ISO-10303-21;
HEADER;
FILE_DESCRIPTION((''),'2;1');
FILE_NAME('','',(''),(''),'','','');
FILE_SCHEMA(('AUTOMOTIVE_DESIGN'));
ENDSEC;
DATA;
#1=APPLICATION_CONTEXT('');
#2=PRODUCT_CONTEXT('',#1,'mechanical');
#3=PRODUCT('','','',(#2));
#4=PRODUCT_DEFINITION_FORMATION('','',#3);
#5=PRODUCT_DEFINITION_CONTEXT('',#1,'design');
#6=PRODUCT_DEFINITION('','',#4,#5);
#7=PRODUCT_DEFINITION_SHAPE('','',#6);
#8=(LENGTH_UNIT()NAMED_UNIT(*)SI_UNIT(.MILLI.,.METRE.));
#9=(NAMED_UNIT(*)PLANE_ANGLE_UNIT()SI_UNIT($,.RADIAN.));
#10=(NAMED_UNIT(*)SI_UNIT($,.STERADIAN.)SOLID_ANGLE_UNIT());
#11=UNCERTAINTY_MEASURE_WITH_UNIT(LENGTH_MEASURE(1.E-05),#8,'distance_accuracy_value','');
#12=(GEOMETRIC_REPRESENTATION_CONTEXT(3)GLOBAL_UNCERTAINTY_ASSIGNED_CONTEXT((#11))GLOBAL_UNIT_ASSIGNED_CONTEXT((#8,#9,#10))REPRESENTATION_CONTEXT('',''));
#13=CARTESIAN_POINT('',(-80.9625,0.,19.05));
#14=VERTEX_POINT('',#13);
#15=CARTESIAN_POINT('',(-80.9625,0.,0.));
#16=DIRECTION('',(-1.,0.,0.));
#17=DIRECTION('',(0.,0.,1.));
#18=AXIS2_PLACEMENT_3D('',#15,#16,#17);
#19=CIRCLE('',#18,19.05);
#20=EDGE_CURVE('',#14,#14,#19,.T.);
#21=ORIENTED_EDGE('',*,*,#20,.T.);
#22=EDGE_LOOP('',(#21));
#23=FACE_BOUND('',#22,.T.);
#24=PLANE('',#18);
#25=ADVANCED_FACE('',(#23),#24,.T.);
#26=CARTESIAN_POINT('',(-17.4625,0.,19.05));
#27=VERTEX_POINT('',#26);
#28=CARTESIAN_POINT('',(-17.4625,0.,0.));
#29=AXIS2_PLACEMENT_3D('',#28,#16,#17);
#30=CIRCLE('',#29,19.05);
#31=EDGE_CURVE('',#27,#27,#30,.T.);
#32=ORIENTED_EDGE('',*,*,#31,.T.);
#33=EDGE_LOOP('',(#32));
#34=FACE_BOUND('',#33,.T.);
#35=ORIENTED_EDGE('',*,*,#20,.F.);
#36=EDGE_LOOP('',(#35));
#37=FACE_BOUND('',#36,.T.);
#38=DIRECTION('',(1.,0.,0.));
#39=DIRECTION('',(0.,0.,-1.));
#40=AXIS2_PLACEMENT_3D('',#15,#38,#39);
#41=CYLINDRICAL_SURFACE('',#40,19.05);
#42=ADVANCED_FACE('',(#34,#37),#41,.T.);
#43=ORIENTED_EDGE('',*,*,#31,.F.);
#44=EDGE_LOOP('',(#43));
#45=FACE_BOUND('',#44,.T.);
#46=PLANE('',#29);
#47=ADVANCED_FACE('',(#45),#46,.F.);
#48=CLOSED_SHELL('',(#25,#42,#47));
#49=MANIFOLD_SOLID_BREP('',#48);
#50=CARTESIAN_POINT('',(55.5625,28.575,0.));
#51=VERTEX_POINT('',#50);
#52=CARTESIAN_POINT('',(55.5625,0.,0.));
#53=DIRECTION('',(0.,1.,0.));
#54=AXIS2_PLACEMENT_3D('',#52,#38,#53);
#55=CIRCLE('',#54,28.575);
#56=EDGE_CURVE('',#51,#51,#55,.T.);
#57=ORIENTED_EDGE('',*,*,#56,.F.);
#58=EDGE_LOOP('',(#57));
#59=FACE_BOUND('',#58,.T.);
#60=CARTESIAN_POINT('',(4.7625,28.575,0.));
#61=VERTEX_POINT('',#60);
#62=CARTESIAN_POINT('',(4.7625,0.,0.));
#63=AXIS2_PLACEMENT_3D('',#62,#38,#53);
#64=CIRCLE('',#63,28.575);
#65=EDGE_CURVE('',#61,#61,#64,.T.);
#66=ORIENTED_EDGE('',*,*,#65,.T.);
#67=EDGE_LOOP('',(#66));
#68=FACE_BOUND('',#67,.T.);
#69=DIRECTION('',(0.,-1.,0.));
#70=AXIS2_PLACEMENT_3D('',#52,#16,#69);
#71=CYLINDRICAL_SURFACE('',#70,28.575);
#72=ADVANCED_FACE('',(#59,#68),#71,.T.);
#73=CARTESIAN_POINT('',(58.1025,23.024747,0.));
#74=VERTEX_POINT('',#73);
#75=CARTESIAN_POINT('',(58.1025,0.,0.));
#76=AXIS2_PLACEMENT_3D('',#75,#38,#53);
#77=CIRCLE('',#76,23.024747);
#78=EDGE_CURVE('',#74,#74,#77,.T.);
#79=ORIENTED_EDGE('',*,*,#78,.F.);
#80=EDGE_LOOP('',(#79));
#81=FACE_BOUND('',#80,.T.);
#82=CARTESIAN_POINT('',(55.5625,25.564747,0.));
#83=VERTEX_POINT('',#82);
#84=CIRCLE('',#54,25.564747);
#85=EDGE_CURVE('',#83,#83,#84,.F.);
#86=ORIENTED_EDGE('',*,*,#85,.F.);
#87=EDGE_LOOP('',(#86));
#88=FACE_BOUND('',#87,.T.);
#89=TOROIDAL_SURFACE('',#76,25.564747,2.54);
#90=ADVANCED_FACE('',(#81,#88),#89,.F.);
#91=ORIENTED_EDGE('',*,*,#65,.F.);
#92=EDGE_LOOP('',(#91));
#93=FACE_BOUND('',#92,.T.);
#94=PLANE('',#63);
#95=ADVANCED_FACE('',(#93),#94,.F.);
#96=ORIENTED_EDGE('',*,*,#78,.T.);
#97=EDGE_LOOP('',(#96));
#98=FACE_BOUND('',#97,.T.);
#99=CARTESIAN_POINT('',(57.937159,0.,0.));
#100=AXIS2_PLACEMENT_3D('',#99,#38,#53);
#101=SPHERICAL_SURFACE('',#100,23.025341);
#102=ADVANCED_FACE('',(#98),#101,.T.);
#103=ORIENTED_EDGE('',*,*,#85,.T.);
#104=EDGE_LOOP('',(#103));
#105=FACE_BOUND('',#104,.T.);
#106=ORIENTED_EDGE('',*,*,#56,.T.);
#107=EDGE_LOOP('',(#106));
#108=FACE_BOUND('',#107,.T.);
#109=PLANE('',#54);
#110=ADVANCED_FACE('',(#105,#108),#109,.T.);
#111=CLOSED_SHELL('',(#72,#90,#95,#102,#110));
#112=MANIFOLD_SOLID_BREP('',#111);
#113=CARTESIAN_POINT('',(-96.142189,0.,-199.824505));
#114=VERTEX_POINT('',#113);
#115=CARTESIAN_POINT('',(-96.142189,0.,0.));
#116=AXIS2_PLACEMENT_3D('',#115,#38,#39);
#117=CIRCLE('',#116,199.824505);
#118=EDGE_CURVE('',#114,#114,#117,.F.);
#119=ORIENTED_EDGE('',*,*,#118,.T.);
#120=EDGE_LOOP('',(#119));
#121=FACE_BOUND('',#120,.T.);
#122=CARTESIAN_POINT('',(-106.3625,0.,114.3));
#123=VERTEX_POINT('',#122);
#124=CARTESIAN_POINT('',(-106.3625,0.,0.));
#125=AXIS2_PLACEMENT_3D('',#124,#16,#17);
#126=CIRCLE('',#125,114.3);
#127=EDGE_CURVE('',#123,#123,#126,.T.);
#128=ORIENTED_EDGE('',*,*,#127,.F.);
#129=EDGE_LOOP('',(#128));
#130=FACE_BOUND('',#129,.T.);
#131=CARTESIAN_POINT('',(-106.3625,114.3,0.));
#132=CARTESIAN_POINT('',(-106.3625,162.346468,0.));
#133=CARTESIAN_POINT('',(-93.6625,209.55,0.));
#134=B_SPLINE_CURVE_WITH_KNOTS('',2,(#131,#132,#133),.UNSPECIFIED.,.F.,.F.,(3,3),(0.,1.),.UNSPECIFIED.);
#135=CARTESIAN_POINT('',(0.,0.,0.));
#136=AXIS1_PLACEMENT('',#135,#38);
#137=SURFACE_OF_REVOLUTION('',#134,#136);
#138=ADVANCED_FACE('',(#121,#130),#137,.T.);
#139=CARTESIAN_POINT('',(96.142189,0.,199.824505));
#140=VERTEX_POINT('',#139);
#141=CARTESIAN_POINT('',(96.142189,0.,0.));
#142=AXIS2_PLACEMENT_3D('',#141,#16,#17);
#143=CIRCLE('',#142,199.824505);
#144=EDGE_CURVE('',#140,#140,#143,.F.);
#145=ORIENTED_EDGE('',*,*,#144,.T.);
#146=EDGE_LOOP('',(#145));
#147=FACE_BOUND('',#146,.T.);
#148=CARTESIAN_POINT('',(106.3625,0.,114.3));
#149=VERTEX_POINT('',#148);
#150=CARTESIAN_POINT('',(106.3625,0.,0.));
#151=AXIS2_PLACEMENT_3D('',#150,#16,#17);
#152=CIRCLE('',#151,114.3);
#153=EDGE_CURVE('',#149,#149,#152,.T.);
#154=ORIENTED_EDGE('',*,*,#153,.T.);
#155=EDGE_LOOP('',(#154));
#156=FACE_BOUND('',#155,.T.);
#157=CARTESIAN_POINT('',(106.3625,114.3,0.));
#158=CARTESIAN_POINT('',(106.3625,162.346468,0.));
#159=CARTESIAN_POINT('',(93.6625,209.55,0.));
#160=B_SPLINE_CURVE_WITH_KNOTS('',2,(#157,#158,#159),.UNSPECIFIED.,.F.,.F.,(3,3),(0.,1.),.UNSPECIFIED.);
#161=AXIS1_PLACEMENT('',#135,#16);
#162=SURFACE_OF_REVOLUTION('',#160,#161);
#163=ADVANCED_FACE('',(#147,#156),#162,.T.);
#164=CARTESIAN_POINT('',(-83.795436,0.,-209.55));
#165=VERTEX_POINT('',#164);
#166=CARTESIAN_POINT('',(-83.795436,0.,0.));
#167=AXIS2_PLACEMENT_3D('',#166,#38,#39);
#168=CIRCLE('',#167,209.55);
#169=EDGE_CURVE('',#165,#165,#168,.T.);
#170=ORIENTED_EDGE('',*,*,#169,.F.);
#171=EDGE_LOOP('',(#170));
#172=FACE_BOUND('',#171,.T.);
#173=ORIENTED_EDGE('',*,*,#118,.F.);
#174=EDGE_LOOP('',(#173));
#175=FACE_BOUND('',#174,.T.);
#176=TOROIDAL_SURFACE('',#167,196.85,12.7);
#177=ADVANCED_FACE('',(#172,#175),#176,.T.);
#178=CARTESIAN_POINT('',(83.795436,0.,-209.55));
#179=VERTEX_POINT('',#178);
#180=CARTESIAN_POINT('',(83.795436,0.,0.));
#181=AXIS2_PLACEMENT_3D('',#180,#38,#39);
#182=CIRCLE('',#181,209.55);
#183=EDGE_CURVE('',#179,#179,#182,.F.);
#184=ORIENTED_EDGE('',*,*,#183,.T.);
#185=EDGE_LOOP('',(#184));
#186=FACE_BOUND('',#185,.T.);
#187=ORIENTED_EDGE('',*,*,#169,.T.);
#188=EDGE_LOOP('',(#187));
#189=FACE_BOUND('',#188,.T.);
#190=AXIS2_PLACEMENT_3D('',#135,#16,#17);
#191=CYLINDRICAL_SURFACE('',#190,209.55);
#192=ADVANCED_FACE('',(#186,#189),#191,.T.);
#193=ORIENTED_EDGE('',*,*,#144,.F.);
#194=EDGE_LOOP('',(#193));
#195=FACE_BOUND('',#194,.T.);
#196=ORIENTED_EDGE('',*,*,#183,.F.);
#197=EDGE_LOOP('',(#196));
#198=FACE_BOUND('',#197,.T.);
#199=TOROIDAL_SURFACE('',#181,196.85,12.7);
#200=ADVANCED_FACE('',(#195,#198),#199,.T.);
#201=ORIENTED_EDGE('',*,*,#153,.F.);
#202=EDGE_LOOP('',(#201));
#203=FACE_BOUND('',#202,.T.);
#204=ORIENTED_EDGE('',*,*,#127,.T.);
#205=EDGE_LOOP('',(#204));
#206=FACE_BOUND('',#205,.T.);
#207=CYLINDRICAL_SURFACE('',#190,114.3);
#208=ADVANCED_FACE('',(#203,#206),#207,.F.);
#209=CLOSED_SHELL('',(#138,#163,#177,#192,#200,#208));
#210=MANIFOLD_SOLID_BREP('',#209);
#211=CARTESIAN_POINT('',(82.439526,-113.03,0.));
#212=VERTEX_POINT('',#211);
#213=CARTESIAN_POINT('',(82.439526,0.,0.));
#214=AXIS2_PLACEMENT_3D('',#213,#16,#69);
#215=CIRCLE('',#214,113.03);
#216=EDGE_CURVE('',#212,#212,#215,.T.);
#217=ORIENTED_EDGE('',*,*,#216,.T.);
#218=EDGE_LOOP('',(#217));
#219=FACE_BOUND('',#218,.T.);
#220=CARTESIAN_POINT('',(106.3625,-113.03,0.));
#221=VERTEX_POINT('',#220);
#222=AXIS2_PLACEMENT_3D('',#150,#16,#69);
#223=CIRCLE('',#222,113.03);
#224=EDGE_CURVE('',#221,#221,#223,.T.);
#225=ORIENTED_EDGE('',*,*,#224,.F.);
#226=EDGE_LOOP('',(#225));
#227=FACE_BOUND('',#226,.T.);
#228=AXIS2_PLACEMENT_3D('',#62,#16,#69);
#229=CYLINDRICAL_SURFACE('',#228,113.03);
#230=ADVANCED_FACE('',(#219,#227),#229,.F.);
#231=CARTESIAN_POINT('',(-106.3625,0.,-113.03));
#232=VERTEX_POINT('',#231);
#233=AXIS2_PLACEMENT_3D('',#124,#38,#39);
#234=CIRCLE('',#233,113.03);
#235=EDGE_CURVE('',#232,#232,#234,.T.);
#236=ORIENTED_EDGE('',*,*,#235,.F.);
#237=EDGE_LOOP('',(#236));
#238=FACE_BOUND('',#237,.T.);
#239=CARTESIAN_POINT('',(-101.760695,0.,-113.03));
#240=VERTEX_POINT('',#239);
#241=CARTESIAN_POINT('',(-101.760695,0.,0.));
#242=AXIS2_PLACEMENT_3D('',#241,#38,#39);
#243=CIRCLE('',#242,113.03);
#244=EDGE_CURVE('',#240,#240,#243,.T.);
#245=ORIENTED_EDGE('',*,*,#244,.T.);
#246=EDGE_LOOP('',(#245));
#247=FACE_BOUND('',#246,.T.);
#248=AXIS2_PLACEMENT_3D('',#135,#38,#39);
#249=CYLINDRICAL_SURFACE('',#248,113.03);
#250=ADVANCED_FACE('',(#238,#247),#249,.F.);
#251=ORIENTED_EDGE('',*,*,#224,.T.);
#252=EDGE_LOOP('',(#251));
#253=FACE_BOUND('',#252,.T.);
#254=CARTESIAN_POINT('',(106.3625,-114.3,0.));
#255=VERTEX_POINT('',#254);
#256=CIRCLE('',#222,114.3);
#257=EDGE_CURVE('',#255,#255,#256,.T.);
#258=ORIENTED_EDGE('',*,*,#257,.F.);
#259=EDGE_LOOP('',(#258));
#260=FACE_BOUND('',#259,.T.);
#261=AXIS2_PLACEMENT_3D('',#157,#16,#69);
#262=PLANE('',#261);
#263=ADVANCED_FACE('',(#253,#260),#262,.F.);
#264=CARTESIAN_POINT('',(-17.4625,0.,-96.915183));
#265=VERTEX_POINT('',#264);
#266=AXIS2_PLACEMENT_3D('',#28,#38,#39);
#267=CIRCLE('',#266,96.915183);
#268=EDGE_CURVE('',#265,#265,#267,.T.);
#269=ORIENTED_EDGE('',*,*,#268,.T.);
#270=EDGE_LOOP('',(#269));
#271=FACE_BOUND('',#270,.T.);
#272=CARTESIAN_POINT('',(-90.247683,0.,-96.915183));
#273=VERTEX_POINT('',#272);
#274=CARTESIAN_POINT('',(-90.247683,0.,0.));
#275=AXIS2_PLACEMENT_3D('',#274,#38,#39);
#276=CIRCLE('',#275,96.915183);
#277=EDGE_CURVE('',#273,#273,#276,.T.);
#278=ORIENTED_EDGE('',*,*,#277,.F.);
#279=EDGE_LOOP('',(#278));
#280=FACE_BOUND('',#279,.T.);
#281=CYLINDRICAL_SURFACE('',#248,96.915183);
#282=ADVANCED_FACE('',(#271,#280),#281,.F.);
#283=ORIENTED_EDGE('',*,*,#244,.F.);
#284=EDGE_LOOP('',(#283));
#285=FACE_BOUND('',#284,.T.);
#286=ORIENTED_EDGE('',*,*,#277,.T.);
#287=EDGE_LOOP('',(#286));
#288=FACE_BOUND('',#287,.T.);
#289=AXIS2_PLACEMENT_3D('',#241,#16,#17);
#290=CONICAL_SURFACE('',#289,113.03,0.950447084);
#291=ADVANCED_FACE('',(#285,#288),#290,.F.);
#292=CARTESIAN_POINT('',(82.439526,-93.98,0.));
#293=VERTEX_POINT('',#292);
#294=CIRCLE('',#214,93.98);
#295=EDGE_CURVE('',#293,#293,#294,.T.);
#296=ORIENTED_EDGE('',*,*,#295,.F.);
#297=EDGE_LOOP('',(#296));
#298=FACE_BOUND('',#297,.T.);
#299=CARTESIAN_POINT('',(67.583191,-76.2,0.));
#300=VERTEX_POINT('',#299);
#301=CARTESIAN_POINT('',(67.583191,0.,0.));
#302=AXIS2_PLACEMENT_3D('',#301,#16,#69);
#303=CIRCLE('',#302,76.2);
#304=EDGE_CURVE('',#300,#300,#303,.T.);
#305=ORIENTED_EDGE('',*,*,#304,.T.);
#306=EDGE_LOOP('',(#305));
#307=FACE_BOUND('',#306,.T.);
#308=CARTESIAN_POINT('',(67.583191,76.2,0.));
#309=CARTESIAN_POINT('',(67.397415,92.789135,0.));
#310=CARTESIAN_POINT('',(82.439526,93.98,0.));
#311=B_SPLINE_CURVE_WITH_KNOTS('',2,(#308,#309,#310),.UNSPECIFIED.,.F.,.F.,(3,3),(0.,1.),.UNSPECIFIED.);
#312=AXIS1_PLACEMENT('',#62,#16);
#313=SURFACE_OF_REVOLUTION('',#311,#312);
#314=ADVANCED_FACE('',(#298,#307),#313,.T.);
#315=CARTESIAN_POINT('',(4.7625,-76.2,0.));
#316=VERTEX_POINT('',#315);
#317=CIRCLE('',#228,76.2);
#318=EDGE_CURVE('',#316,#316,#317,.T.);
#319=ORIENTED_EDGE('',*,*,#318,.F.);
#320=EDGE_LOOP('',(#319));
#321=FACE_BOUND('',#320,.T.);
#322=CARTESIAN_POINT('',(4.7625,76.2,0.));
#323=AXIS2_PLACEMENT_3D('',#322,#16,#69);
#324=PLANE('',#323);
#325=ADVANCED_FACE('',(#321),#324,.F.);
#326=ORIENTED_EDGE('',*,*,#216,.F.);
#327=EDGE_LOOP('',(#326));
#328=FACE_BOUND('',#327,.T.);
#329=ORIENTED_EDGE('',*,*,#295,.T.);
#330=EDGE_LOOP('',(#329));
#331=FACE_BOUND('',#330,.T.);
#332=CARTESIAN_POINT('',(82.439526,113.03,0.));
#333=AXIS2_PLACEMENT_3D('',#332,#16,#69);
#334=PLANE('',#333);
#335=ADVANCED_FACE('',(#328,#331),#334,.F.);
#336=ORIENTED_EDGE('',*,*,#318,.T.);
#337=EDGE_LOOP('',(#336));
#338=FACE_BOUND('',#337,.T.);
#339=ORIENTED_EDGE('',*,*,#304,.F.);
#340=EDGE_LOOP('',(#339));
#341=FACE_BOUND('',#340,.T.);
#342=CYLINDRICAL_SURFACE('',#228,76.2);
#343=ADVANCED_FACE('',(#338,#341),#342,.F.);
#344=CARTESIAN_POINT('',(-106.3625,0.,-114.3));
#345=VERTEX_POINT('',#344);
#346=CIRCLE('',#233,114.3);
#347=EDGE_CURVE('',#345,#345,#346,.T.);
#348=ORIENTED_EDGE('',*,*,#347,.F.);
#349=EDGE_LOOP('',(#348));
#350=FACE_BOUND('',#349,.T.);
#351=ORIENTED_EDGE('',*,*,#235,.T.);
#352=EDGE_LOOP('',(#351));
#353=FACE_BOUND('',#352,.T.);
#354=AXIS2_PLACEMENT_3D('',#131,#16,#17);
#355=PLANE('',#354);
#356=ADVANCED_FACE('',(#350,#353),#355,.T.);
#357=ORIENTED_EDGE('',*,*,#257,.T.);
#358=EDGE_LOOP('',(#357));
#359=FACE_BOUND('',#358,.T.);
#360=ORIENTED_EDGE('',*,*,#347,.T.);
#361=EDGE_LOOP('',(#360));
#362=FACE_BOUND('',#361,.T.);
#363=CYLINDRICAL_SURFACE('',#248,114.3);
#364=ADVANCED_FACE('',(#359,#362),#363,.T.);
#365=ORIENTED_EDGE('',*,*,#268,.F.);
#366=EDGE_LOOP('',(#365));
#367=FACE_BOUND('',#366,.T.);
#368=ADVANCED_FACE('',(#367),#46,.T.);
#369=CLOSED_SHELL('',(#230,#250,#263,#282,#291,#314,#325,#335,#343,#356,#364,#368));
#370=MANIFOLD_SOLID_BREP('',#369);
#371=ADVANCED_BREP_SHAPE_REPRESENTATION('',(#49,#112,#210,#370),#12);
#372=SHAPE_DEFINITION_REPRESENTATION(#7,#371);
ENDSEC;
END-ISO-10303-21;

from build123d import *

# Parameters (mm, degrees)
SKETCH4_R           = 28.575
BOSS_EXTRUDE2_DEPTH = 50.8
SKETCH6_R           = 23.024747335
BOSS_EXTRUDE5_DEPTH = 2.54
DOME1_FACE_RADIUS   = 23.024747335
DOME1_HEIGHT        = 22.86
FILLET1_R           = 2.54
SKETCH5_R           = 19.05
BOSS_EXTRUDE3_DEPTH = 63.5
FILLET2_R           = 12.7


with BuildPart() as part:
    # Sketch1 → Revolve1 (revolve)
    with BuildSketch(Plane.XY, mode=Mode.PRIVATE) as revolve1_sk:
        with BuildLine():
            Line((0, 209.55), (93.6625, 209.55))
            add(Edge.make_bspline(
                [(93.6625, 209.55), (106.3625, 162.346468393), (106.3625, 114.3)],
                knots=[0, 0, 0, 1, 1, 1], degree=2))
            Line((106.3625, 114.3), (0, 114.3))
            Line((0, 114.3), (0, 209.55))
        make_face()
    revolve1 = revolve(revolve1_sk.sketch.rotate(Axis((0, 0, 0), (1, 0, 0)), 90), axis=Axis((0, 0, 0), (1, 0, 0)))

    # Mirror1: Revolve1 across Right Plane
    add(revolve1.mirror(Plane(origin=(0, 0, 0), x_dir=(0, 0, -1), z_dir=(1, 0, 0))))

    # Fillet2
    fillet2_edges = [part.edges().sort_by_distance(p)[0] for p in [
        (-93.6625, 0, -209.55),
        (93.6625, 0, -209.55),
    ]]
    fillet(fillet2_edges, radius=FILLET2_R)


with BuildPart() as body_2:
    # Sketch2 → Revolve2 (revolve)
    with BuildSketch(Plane.XY, mode=Mode.PRIVATE) as revolve2_sk:
        Polygon((-17.4625, 0), (-17.4625, 96.915183097), (-90.247683097, 96.915183097), (-101.760694514, 113.03), (-106.3625, 113.03), (-106.3625, 114.3), (0, 114.3), (0, 0), align=None)
    revolve(revolve2_sk.sketch.rotate(Axis((0, 0, 0), (-1, 0, 0)), 90), axis=Axis((0, 0, 0), (-1, 0, 0)))

    # Sketch3 → Revolve3 (revolve)
    with BuildSketch(Plane.XY, mode=Mode.PRIVATE) as revolve3_sk:
        with BuildLine():
            Line((106.3625, 114.3), (0, 114.3))
            Line((0, 114.3), (0, 0))
            Line((0, 0), (4.7625, 0))
            Line((4.7625, 0), (4.7625, 76.2))
            Line((4.7625, 76.2), (67.583190848, 76.2))
            add(Edge.make_bspline(
                [(67.583190848, 76.2), (67.397414566, 92.789135053), (82.439526037, 93.98)],
                knots=[0, 0, 0, 1, 1, 1], degree=2))
            Line((82.439526037, 93.98), (82.439526037, 113.03))
            Line((82.439526037, 113.03), (106.3625, 113.03))
            Line((106.3625, 113.03), (106.3625, 114.3))
        make_face()
    revolve(revolve3_sk.sketch.rotate(Axis((4.7625, 0, 0), (1, 0, 0)), 180), axis=Axis((4.7625, 0, 0), (1, 0, 0)))


with BuildPart() as body_3:
    # Sketch4 → Boss-Extrude2 (new body)
    with BuildSketch(Plane(origin=(4.7625, 0, 0), x_dir=(0, 0, -1), z_dir=(1, 0, 0))):
        with Locations(Location((0, 0, 0), (0, 0, 90))):
            Circle(SKETCH4_R)
    extrude(amount=BOSS_EXTRUDE2_DEPTH)

    # Sketch6 → Boss-Extrude5 (add)
    with BuildSketch(Plane(origin=(55.5625, 0, 0), x_dir=(0, 0, -1), z_dir=(1, 0, 0))):
        with Locations(Location((0, 0, 0), (0, 0, 90))):
            Circle(SKETCH6_R)
    extrude(amount=BOSS_EXTRUDE5_DEPTH)

    # Dome1: a dome of height H over a round flat face of radius A is a cap of a sphere of radius (A * A + H * H) / (2 * H)
    dome1_r = (DOME1_FACE_RADIUS * DOME1_FACE_RADIUS + DOME1_HEIGHT * DOME1_HEIGHT) / (2 * DOME1_HEIGHT)
    dome1_base = Plane((58.1025, 0, 0), z_dir=(1, 0, 0))
    with Locations(dome1_base.offset(DOME1_HEIGHT - dome1_r)):
        dome1_ball = Sphere(dome1_r, mode=Mode.PRIVATE)
    add(split(dome1_ball, bisect_by=dome1_base, keep=Keep.TOP, mode=Mode.PRIVATE))

    # Fillet1
    fillet1_edges = [body_3.edges().sort_by_distance(p)[0] for p in [
        (55.5625, -23.024747335, 0),
    ]]
    fillet(fillet1_edges, radius=FILLET1_R - 0.0001)  # a hair under: the kernel refuses the full size


with BuildPart() as body_4:
    # Sketch5 → Boss-Extrude3 (new body)
    with BuildSketch(Plane.ZY.offset(17.4625)):
        Circle(SKETCH5_R)
    extrude(amount=BOSS_EXTRUDE3_DEPTH)


solid = Compound([part.part, body_2.part, body_3.part, body_4.part])
